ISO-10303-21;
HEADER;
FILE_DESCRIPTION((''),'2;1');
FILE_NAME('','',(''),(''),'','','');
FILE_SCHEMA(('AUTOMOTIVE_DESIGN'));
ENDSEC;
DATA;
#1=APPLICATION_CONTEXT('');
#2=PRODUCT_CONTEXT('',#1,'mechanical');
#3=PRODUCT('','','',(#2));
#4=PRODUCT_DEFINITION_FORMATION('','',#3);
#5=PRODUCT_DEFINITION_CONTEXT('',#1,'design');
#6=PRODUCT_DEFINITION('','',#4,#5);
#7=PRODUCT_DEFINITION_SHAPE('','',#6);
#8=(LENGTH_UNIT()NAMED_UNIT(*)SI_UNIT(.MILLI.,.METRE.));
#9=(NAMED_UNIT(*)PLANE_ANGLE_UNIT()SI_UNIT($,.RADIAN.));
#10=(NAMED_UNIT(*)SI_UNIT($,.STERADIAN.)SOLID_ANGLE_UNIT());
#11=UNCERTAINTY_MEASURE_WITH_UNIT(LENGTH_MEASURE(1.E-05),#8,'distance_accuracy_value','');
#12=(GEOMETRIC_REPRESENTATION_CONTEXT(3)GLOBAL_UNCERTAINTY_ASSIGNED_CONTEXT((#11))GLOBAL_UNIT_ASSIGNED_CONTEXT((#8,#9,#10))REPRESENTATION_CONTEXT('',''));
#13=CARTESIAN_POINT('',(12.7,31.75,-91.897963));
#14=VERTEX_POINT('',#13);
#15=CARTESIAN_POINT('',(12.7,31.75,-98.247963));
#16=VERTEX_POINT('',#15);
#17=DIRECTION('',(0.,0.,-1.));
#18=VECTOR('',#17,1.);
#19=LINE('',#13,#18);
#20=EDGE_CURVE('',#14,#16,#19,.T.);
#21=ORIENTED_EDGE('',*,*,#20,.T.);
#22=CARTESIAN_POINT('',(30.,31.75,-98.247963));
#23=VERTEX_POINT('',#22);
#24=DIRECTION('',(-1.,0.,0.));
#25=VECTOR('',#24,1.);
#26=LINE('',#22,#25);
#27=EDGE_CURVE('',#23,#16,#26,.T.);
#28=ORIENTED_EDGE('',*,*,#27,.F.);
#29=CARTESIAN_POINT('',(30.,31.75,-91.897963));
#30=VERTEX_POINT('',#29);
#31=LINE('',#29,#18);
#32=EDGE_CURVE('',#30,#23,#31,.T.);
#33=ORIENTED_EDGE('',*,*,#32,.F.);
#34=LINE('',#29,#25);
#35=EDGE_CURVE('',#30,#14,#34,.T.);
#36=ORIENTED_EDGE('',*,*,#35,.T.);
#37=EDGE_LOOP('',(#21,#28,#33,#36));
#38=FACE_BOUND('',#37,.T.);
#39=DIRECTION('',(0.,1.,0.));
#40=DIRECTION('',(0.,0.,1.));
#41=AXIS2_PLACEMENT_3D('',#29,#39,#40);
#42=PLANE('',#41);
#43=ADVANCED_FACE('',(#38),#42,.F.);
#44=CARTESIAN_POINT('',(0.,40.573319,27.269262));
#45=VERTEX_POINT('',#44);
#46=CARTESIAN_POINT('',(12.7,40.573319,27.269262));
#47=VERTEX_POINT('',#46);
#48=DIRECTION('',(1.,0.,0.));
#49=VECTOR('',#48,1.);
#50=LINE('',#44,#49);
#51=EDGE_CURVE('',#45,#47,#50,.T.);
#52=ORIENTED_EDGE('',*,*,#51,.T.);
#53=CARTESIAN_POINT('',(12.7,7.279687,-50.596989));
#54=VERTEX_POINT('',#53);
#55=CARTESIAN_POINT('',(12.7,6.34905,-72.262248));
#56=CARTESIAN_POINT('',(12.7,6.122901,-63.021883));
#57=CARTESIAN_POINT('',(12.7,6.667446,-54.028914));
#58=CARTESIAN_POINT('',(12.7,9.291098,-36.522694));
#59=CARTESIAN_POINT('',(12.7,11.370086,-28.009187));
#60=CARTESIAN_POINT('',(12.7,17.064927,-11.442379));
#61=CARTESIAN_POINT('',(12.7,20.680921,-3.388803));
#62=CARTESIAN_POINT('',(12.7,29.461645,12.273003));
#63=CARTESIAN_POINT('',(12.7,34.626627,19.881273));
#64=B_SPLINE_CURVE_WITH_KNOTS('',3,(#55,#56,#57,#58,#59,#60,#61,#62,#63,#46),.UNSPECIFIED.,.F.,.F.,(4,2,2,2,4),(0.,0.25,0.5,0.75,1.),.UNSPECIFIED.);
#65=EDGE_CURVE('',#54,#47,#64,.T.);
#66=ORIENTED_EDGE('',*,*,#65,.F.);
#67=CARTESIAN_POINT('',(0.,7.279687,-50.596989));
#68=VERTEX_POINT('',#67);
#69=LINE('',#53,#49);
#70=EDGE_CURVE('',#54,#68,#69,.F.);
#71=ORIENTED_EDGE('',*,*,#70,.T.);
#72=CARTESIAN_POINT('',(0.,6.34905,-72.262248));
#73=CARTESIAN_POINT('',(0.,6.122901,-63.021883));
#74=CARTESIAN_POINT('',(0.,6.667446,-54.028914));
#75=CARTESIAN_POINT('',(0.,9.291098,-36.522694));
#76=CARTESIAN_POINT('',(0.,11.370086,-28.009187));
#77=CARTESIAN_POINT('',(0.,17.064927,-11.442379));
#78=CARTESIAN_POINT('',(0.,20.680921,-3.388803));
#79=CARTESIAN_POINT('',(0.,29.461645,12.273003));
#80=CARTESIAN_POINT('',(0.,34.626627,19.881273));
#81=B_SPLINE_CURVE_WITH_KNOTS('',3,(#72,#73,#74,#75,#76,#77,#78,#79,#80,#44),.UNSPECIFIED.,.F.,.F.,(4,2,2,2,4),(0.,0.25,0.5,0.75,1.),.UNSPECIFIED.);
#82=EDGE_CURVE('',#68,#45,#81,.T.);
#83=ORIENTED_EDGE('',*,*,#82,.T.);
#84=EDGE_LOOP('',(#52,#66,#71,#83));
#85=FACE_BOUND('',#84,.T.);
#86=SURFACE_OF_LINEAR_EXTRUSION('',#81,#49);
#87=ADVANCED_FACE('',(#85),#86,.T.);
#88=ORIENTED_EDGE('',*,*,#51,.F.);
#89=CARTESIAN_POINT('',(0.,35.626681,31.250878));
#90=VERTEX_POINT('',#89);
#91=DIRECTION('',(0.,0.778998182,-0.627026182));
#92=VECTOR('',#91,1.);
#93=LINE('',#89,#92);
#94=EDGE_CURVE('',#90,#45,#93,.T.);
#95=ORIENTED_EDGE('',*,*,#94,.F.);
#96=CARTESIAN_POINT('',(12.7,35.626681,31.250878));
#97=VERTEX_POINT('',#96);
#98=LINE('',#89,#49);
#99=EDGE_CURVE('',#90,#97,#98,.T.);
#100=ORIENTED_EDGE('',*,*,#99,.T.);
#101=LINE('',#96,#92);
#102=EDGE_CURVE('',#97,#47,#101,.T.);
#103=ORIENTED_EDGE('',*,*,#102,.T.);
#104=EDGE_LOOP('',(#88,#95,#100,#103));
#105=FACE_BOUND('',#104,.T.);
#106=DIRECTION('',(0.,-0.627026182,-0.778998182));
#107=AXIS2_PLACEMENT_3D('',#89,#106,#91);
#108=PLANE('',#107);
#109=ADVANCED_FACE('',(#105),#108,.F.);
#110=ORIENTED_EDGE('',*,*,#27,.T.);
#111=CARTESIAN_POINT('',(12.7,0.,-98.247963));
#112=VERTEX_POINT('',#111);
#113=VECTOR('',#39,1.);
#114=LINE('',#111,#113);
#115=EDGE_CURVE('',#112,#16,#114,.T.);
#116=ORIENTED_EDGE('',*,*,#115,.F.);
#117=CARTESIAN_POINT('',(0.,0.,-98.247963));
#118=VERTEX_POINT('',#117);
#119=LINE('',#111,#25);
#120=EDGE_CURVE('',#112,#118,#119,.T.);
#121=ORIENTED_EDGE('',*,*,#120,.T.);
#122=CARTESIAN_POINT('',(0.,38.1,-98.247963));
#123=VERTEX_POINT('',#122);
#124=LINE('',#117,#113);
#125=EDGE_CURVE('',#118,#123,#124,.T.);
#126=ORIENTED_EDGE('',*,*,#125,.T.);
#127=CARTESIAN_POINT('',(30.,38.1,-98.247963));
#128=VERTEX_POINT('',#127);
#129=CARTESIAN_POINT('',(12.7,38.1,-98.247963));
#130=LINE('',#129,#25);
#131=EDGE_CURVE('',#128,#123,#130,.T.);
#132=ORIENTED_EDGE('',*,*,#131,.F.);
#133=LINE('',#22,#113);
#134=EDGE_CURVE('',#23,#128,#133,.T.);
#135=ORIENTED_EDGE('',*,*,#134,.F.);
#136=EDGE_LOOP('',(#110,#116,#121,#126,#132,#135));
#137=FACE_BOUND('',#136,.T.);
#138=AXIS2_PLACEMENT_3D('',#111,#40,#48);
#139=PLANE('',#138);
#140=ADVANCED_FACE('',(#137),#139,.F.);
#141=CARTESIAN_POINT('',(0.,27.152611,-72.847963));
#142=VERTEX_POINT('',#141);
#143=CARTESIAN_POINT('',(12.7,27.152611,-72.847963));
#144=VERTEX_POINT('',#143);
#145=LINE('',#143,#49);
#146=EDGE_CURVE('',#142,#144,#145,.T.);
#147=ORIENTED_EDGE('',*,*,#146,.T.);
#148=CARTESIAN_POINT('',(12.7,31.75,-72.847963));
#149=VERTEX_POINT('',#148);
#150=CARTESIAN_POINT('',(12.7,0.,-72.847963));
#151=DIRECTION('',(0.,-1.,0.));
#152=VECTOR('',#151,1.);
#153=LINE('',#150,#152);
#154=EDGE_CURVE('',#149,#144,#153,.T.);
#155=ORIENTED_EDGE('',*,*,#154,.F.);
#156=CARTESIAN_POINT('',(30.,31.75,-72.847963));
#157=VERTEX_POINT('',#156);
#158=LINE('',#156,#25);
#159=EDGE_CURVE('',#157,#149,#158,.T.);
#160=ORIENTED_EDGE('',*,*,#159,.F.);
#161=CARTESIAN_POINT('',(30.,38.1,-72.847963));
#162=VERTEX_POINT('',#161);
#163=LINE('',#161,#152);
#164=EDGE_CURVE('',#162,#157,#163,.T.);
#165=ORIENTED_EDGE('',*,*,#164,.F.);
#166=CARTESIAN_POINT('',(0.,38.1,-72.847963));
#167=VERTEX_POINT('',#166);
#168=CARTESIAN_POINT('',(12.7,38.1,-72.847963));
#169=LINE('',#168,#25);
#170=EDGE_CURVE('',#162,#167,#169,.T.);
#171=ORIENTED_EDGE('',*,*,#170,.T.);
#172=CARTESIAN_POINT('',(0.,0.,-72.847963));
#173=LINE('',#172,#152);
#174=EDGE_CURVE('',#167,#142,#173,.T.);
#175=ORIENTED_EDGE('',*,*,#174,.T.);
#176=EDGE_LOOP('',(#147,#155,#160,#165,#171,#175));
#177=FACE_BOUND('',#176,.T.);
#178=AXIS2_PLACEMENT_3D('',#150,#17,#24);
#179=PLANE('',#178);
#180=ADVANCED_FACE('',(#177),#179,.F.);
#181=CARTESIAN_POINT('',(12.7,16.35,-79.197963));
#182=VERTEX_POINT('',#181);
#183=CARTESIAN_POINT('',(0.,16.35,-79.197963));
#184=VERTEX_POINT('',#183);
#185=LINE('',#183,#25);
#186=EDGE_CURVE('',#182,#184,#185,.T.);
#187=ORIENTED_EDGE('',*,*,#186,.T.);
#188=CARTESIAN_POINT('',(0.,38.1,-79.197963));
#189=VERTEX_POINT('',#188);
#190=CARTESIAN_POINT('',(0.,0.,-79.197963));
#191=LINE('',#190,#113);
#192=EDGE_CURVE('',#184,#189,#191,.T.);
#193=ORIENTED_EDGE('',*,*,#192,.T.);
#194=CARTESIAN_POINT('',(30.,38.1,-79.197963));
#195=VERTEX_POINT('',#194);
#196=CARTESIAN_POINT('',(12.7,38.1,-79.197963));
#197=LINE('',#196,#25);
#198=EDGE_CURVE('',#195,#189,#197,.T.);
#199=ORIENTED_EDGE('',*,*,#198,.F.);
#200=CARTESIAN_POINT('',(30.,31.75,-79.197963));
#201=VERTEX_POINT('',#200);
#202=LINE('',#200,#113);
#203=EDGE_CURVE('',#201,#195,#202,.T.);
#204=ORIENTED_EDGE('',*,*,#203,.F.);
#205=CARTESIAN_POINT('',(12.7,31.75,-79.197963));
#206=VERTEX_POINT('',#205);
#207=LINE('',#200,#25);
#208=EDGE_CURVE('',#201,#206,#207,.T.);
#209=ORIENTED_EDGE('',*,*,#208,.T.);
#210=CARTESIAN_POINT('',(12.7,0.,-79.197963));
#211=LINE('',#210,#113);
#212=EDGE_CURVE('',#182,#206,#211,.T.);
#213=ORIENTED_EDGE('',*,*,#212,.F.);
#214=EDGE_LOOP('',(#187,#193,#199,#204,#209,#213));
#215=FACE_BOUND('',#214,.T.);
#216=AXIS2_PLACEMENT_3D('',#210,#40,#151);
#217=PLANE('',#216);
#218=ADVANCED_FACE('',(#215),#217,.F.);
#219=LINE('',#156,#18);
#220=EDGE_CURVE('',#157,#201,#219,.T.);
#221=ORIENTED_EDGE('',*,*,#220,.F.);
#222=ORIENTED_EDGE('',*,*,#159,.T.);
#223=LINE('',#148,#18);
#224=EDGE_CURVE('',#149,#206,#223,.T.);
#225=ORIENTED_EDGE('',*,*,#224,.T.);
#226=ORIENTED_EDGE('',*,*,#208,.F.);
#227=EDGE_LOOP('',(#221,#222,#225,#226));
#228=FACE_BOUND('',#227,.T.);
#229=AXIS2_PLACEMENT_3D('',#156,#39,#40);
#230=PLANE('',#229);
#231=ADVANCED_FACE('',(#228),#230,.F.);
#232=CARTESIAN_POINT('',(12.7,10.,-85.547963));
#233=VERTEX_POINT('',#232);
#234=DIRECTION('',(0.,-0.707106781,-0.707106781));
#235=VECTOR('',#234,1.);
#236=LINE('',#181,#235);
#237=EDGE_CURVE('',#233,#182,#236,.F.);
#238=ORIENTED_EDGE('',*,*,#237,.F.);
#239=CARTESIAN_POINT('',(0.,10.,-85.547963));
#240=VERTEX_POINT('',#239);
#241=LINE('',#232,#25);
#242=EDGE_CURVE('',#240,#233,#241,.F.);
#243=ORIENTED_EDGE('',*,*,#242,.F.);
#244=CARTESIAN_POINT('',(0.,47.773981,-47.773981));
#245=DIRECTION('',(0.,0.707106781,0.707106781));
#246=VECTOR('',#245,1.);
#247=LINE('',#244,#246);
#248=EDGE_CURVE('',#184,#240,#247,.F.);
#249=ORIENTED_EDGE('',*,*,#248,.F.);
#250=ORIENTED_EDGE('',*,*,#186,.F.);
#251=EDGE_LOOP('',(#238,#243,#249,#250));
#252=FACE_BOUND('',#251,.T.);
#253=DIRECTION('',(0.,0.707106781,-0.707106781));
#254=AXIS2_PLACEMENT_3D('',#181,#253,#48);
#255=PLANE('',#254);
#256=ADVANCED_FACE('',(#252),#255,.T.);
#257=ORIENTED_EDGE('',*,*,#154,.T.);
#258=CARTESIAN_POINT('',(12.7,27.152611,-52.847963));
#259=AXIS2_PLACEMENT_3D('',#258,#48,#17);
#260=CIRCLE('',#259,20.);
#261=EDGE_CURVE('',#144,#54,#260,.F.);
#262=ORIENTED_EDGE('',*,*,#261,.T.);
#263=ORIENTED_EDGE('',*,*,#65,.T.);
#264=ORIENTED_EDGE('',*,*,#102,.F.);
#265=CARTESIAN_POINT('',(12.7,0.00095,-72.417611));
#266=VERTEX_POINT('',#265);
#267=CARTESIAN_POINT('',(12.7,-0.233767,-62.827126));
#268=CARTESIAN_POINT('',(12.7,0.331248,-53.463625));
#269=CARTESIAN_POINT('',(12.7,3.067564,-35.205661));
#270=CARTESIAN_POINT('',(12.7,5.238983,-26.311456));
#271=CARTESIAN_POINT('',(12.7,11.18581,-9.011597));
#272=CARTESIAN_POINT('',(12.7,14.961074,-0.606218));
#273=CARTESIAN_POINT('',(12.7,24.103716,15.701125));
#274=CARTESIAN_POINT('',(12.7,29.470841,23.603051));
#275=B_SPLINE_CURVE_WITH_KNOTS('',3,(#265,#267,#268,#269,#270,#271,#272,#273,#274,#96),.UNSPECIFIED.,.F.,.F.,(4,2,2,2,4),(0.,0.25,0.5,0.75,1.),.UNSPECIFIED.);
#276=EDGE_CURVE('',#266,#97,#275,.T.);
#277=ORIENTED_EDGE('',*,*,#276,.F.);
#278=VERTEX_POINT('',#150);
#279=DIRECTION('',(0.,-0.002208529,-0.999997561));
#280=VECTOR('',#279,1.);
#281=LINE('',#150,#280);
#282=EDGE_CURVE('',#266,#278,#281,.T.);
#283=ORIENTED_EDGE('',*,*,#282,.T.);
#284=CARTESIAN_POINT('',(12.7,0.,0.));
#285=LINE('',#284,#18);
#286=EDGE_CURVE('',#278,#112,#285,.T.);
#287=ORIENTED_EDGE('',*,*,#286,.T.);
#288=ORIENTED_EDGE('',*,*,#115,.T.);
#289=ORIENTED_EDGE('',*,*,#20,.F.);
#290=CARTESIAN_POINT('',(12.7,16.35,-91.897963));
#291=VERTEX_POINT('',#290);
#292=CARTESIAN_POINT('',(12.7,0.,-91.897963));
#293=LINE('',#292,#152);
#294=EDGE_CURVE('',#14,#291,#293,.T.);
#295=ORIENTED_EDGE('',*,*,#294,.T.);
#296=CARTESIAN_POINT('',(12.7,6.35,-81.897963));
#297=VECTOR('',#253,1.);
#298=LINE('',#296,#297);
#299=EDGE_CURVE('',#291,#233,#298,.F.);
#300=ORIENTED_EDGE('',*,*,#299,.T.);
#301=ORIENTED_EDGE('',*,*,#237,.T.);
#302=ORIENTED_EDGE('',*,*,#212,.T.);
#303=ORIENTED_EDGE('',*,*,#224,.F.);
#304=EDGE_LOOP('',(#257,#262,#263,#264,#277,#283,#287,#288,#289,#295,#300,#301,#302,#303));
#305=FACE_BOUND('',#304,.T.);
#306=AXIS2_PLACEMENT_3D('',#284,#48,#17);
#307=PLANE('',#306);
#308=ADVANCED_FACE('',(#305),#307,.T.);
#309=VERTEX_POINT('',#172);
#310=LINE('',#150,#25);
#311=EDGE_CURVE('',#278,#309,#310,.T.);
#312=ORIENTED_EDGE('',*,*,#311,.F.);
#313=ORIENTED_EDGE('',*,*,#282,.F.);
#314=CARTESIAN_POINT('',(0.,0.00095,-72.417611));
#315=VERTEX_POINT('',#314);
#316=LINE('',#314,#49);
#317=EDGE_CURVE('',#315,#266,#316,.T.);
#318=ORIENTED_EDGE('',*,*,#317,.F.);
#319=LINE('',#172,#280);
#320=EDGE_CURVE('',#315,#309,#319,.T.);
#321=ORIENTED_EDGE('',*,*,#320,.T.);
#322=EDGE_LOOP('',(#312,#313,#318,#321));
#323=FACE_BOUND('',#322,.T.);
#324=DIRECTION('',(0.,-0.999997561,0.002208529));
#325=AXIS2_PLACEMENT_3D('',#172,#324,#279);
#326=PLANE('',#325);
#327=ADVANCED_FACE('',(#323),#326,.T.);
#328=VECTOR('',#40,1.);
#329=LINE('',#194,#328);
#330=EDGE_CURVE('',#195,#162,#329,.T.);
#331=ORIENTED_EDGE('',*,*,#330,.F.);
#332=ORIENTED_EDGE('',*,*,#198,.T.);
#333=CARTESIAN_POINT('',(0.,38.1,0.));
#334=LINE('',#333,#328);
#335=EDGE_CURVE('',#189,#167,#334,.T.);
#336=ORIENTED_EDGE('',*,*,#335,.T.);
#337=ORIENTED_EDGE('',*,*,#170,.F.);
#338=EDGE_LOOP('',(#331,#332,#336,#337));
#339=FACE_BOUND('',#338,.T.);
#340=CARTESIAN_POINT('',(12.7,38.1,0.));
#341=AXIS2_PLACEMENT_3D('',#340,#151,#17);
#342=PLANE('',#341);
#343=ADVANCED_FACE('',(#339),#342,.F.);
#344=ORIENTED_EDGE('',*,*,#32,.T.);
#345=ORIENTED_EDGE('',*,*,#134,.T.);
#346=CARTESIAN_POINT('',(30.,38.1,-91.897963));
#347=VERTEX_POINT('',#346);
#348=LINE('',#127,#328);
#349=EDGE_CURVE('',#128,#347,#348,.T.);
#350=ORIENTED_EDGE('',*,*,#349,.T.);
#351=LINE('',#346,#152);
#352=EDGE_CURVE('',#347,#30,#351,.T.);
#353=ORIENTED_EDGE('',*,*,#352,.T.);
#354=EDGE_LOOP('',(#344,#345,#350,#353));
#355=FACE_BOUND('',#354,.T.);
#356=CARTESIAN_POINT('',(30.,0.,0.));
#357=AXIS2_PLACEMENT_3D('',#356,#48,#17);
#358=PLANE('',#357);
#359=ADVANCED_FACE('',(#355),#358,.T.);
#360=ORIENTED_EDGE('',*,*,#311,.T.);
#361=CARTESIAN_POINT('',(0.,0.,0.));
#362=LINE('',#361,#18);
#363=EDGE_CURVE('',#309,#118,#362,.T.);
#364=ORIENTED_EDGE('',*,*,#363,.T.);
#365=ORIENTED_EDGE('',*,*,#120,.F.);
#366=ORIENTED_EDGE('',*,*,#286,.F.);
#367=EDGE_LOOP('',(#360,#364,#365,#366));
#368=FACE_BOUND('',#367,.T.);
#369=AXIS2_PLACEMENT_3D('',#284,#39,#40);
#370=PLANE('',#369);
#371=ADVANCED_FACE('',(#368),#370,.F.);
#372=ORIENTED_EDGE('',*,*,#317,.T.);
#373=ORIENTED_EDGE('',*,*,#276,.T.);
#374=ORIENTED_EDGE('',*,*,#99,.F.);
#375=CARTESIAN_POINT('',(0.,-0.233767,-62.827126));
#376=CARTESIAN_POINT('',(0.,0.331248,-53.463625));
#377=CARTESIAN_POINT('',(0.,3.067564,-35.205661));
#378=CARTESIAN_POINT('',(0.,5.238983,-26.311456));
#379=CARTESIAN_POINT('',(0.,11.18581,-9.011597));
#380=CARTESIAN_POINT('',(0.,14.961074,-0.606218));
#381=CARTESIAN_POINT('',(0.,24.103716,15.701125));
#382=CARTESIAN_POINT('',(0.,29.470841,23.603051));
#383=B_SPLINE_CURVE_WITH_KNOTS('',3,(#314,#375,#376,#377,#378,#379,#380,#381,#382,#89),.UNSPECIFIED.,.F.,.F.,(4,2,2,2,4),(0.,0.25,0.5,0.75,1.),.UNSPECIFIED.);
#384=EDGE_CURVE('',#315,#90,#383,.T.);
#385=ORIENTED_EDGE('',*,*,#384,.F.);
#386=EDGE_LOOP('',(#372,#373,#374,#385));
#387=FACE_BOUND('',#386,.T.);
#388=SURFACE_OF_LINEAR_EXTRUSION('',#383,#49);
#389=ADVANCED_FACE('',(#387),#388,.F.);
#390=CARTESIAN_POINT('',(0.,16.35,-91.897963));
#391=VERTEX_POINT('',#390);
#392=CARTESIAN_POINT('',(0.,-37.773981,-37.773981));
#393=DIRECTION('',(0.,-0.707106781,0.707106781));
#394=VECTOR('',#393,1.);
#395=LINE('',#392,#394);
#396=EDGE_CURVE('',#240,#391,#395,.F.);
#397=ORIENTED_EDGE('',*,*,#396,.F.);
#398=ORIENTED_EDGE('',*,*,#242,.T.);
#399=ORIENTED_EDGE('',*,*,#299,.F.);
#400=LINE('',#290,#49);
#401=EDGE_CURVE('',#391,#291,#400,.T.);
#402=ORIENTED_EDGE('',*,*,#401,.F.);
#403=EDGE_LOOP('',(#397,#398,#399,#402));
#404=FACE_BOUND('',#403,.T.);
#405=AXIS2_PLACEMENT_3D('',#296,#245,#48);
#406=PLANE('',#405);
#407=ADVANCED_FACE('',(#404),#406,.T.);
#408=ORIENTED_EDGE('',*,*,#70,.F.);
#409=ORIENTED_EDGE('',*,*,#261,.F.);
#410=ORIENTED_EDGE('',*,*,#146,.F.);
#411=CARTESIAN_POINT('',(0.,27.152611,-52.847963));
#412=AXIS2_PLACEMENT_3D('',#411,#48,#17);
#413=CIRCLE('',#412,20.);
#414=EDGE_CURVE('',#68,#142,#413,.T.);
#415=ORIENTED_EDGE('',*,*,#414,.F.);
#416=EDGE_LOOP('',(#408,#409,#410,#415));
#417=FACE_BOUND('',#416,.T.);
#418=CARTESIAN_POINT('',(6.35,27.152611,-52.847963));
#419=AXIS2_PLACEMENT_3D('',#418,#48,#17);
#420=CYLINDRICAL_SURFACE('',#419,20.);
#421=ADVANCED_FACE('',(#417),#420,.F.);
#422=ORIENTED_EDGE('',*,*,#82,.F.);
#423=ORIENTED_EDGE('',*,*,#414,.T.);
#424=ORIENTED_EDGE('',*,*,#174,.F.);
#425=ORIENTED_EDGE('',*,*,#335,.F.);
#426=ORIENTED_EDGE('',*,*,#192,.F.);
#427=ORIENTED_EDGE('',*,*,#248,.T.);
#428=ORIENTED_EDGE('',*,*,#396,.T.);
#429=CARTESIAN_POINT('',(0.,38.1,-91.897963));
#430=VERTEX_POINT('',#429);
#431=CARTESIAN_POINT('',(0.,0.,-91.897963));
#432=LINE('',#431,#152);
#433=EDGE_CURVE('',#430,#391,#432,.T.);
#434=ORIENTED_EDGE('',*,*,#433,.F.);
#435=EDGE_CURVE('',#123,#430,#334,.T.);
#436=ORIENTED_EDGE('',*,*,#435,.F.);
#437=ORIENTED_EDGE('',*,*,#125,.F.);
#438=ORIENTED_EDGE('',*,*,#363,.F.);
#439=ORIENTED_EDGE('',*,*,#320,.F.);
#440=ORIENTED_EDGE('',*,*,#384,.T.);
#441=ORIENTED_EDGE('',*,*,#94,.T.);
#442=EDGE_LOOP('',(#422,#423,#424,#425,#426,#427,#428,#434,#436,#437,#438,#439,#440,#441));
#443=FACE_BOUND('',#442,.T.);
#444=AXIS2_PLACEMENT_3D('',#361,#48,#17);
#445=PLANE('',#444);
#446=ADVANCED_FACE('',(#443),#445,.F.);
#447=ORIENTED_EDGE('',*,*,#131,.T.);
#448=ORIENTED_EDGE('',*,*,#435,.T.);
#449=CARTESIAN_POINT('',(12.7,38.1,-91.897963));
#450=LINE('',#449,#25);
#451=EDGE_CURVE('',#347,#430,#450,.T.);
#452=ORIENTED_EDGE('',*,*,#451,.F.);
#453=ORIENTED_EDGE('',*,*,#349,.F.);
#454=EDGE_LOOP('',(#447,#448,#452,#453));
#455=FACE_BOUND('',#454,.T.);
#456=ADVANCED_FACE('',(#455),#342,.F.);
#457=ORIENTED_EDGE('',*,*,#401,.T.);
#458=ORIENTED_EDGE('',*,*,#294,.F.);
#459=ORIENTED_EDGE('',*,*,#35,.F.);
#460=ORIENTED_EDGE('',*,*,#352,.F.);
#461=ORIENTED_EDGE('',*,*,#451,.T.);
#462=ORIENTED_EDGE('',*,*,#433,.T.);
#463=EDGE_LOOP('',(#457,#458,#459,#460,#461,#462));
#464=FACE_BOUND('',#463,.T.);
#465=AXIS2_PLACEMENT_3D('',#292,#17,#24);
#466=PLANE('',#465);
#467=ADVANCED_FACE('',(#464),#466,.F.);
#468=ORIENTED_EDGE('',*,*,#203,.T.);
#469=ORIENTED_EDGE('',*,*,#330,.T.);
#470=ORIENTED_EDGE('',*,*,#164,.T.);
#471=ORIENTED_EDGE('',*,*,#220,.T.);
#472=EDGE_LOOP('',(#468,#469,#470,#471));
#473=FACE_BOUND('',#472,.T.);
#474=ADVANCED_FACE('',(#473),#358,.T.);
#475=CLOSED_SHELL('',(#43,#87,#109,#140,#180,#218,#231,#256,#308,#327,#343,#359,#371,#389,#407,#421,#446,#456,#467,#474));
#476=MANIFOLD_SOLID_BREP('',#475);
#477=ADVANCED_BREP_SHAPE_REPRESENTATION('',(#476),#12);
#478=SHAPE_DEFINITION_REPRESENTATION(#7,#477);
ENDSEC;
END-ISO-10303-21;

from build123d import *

# Parameters (mm, degrees)
BOSS_EXTRUDE1_DEPTH = 12.7
EXTRUDE_THIN1_START = -6.35
EXTRUDE_THIN1_DEPTH = 12.7
BOSS_EXTRUDE2_DEPTH = 12.7
SKETCH4_W           = 6.35
SKETCH4_H           = 6.35
BOSS_EXTRUDE3_DEPTH = 17.3
FILLET1_R           = 20
CHAMFER1_SIZE       = 10


# Read off the part's stored shape, not the designer's step: Extrude-Thin1
with BuildPart() as part:
    # Sketch1 → Boss-Extrude1 (new body)
    with BuildSketch(Plane(origin=(0, 0, 0), x_dir=(0, 0, -1), z_dir=(1, 0, 0))):
        Polygon((72.847962895, 3.175), (72.847962895, 0), (98.247962895, 0), (98.247962895, 38.1), (91.897962895, 38.1), (91.897962895, 6.35), (79.197962895, 6.35), (79.197962895, 38.1), (72.847962895, 38.1), align=None)
    extrude(amount=BOSS_EXTRUDE1_DEPTH)



with BuildPart() as body_2:
    # Extrude-Thin1 outline → Extrude-Thin1 (new body)
    with BuildSketch(Plane(origin=(6.35, 0, 0), x_dir=(0, 0, -1), z_dir=(1, 0, 0)).offset(EXTRUDE_THIN1_START)):
        with BuildLine():
            Line((72.417611424, 0.000950446), (72.262248261, 6.349049554))
            add(Edge.make_bspline(
                [(72.262248261, 6.349049554), (63.021883212, 6.122901173), (54.028914036, 6.667445615), (36.522694485, 9.291097632), (28.009187017, 11.370086401), (11.442378767, 17.064926737), (3.388803369, 20.680920683), (-12.273002956, 29.461644656), (-19.881272632, 34.626626552), (-27.26926203, 40.573319228)],
                knots=[0, 0, 0, 0, 0.25, 0.25, 0.5, 0.5, 0.75, 0.75, 1, 1, 1, 1], degree=3))
            Line((-27.26926203, 40.573319228), (-31.250878284, 35.626680772))
            add(Edge.make_bspline(
                [(72.417611424, 0.000950446), (62.82712633, -0.233766762), (53.463624565, 0.331247938), (35.205660639, 3.067563666), (26.31145557, 5.238983498), (9.011597154, 11.185809829), (0.606218421, 14.961073948), (-15.70112511, 24.103715563), (-23.603051159, 29.470841193), (-31.250878284, 35.626680772)],
                knots=[0, 0, 0, 0, 0.25, 0.25, 0.5, 0.5, 0.75, 0.75, 1, 1, 1, 1], degree=3))
        make_face()
    extrude(amount=EXTRUDE_THIN1_DEPTH)


with BuildPart() as part_1:
    add(part.part)

    add(body_2.part)  # Boss-Extrude2 merges body 2
    # Sketch3 → Boss-Extrude2 (add)
    with BuildSketch(Plane(origin=(12.7, 0, 0), x_dir=(0, 0, -1), z_dir=(1, 0, 0))):
        Polygon((72.262248261, 6.349049554), (72.847962895, 6.349049554), (72.847962895, 0), (72.417611424, 0.000950446), align=None)
    extrude(amount=-BOSS_EXTRUDE2_DEPTH)

    # Sketch4 → Boss-Extrude3 (add)
    with BuildSketch(Plane(origin=(12.7, 0, 0), x_dir=(0, 0, -1), z_dir=(1, 0, 0))):
        with Locations((76.022962895, 34.925)):
            Rectangle(SKETCH4_W, SKETCH4_H)
        with Locations((95.072962895, 34.925)):
            Rectangle(SKETCH4_W, SKETCH4_H)
    extrude(amount=BOSS_EXTRUDE3_DEPTH)

    # Fillet1
    fillet1_edges = [part_1.edges().sort_by_distance(p)[0] for p in [
        (6.35, 6.349049554, -72.847962895),
    ]]
    fillet(fillet1_edges, radius=FILLET1_R)

    # Chamfer1
    # the kernel refuses this chamfer: 10 mm, written as the material it adds along each edge
    with BuildSketch(Plane(origin=(0, 6.35, -91.897962895), x_dir=(0, -0.027495876610586664, 0.9996219169112968), z_dir=(1, 0, 0)), Plane(origin=(0, 6.35, -79.197962895), x_dir=(0, 0.9996219169112968, 0.027495876610586317), z_dir=(1, 0, 0))) as chamfer1_piece_1:
        Polygon((CHAMFER1_SIZE * 0.999621916911, -CHAMFER1_SIZE * 0.0274958766106), (-CHAMFER1_SIZE * 0.0274958766106, -CHAMFER1_SIZE * 0.999621916911), (0, 0), align=None)
    extrude(amount=12.7)


solid = part_1.part
